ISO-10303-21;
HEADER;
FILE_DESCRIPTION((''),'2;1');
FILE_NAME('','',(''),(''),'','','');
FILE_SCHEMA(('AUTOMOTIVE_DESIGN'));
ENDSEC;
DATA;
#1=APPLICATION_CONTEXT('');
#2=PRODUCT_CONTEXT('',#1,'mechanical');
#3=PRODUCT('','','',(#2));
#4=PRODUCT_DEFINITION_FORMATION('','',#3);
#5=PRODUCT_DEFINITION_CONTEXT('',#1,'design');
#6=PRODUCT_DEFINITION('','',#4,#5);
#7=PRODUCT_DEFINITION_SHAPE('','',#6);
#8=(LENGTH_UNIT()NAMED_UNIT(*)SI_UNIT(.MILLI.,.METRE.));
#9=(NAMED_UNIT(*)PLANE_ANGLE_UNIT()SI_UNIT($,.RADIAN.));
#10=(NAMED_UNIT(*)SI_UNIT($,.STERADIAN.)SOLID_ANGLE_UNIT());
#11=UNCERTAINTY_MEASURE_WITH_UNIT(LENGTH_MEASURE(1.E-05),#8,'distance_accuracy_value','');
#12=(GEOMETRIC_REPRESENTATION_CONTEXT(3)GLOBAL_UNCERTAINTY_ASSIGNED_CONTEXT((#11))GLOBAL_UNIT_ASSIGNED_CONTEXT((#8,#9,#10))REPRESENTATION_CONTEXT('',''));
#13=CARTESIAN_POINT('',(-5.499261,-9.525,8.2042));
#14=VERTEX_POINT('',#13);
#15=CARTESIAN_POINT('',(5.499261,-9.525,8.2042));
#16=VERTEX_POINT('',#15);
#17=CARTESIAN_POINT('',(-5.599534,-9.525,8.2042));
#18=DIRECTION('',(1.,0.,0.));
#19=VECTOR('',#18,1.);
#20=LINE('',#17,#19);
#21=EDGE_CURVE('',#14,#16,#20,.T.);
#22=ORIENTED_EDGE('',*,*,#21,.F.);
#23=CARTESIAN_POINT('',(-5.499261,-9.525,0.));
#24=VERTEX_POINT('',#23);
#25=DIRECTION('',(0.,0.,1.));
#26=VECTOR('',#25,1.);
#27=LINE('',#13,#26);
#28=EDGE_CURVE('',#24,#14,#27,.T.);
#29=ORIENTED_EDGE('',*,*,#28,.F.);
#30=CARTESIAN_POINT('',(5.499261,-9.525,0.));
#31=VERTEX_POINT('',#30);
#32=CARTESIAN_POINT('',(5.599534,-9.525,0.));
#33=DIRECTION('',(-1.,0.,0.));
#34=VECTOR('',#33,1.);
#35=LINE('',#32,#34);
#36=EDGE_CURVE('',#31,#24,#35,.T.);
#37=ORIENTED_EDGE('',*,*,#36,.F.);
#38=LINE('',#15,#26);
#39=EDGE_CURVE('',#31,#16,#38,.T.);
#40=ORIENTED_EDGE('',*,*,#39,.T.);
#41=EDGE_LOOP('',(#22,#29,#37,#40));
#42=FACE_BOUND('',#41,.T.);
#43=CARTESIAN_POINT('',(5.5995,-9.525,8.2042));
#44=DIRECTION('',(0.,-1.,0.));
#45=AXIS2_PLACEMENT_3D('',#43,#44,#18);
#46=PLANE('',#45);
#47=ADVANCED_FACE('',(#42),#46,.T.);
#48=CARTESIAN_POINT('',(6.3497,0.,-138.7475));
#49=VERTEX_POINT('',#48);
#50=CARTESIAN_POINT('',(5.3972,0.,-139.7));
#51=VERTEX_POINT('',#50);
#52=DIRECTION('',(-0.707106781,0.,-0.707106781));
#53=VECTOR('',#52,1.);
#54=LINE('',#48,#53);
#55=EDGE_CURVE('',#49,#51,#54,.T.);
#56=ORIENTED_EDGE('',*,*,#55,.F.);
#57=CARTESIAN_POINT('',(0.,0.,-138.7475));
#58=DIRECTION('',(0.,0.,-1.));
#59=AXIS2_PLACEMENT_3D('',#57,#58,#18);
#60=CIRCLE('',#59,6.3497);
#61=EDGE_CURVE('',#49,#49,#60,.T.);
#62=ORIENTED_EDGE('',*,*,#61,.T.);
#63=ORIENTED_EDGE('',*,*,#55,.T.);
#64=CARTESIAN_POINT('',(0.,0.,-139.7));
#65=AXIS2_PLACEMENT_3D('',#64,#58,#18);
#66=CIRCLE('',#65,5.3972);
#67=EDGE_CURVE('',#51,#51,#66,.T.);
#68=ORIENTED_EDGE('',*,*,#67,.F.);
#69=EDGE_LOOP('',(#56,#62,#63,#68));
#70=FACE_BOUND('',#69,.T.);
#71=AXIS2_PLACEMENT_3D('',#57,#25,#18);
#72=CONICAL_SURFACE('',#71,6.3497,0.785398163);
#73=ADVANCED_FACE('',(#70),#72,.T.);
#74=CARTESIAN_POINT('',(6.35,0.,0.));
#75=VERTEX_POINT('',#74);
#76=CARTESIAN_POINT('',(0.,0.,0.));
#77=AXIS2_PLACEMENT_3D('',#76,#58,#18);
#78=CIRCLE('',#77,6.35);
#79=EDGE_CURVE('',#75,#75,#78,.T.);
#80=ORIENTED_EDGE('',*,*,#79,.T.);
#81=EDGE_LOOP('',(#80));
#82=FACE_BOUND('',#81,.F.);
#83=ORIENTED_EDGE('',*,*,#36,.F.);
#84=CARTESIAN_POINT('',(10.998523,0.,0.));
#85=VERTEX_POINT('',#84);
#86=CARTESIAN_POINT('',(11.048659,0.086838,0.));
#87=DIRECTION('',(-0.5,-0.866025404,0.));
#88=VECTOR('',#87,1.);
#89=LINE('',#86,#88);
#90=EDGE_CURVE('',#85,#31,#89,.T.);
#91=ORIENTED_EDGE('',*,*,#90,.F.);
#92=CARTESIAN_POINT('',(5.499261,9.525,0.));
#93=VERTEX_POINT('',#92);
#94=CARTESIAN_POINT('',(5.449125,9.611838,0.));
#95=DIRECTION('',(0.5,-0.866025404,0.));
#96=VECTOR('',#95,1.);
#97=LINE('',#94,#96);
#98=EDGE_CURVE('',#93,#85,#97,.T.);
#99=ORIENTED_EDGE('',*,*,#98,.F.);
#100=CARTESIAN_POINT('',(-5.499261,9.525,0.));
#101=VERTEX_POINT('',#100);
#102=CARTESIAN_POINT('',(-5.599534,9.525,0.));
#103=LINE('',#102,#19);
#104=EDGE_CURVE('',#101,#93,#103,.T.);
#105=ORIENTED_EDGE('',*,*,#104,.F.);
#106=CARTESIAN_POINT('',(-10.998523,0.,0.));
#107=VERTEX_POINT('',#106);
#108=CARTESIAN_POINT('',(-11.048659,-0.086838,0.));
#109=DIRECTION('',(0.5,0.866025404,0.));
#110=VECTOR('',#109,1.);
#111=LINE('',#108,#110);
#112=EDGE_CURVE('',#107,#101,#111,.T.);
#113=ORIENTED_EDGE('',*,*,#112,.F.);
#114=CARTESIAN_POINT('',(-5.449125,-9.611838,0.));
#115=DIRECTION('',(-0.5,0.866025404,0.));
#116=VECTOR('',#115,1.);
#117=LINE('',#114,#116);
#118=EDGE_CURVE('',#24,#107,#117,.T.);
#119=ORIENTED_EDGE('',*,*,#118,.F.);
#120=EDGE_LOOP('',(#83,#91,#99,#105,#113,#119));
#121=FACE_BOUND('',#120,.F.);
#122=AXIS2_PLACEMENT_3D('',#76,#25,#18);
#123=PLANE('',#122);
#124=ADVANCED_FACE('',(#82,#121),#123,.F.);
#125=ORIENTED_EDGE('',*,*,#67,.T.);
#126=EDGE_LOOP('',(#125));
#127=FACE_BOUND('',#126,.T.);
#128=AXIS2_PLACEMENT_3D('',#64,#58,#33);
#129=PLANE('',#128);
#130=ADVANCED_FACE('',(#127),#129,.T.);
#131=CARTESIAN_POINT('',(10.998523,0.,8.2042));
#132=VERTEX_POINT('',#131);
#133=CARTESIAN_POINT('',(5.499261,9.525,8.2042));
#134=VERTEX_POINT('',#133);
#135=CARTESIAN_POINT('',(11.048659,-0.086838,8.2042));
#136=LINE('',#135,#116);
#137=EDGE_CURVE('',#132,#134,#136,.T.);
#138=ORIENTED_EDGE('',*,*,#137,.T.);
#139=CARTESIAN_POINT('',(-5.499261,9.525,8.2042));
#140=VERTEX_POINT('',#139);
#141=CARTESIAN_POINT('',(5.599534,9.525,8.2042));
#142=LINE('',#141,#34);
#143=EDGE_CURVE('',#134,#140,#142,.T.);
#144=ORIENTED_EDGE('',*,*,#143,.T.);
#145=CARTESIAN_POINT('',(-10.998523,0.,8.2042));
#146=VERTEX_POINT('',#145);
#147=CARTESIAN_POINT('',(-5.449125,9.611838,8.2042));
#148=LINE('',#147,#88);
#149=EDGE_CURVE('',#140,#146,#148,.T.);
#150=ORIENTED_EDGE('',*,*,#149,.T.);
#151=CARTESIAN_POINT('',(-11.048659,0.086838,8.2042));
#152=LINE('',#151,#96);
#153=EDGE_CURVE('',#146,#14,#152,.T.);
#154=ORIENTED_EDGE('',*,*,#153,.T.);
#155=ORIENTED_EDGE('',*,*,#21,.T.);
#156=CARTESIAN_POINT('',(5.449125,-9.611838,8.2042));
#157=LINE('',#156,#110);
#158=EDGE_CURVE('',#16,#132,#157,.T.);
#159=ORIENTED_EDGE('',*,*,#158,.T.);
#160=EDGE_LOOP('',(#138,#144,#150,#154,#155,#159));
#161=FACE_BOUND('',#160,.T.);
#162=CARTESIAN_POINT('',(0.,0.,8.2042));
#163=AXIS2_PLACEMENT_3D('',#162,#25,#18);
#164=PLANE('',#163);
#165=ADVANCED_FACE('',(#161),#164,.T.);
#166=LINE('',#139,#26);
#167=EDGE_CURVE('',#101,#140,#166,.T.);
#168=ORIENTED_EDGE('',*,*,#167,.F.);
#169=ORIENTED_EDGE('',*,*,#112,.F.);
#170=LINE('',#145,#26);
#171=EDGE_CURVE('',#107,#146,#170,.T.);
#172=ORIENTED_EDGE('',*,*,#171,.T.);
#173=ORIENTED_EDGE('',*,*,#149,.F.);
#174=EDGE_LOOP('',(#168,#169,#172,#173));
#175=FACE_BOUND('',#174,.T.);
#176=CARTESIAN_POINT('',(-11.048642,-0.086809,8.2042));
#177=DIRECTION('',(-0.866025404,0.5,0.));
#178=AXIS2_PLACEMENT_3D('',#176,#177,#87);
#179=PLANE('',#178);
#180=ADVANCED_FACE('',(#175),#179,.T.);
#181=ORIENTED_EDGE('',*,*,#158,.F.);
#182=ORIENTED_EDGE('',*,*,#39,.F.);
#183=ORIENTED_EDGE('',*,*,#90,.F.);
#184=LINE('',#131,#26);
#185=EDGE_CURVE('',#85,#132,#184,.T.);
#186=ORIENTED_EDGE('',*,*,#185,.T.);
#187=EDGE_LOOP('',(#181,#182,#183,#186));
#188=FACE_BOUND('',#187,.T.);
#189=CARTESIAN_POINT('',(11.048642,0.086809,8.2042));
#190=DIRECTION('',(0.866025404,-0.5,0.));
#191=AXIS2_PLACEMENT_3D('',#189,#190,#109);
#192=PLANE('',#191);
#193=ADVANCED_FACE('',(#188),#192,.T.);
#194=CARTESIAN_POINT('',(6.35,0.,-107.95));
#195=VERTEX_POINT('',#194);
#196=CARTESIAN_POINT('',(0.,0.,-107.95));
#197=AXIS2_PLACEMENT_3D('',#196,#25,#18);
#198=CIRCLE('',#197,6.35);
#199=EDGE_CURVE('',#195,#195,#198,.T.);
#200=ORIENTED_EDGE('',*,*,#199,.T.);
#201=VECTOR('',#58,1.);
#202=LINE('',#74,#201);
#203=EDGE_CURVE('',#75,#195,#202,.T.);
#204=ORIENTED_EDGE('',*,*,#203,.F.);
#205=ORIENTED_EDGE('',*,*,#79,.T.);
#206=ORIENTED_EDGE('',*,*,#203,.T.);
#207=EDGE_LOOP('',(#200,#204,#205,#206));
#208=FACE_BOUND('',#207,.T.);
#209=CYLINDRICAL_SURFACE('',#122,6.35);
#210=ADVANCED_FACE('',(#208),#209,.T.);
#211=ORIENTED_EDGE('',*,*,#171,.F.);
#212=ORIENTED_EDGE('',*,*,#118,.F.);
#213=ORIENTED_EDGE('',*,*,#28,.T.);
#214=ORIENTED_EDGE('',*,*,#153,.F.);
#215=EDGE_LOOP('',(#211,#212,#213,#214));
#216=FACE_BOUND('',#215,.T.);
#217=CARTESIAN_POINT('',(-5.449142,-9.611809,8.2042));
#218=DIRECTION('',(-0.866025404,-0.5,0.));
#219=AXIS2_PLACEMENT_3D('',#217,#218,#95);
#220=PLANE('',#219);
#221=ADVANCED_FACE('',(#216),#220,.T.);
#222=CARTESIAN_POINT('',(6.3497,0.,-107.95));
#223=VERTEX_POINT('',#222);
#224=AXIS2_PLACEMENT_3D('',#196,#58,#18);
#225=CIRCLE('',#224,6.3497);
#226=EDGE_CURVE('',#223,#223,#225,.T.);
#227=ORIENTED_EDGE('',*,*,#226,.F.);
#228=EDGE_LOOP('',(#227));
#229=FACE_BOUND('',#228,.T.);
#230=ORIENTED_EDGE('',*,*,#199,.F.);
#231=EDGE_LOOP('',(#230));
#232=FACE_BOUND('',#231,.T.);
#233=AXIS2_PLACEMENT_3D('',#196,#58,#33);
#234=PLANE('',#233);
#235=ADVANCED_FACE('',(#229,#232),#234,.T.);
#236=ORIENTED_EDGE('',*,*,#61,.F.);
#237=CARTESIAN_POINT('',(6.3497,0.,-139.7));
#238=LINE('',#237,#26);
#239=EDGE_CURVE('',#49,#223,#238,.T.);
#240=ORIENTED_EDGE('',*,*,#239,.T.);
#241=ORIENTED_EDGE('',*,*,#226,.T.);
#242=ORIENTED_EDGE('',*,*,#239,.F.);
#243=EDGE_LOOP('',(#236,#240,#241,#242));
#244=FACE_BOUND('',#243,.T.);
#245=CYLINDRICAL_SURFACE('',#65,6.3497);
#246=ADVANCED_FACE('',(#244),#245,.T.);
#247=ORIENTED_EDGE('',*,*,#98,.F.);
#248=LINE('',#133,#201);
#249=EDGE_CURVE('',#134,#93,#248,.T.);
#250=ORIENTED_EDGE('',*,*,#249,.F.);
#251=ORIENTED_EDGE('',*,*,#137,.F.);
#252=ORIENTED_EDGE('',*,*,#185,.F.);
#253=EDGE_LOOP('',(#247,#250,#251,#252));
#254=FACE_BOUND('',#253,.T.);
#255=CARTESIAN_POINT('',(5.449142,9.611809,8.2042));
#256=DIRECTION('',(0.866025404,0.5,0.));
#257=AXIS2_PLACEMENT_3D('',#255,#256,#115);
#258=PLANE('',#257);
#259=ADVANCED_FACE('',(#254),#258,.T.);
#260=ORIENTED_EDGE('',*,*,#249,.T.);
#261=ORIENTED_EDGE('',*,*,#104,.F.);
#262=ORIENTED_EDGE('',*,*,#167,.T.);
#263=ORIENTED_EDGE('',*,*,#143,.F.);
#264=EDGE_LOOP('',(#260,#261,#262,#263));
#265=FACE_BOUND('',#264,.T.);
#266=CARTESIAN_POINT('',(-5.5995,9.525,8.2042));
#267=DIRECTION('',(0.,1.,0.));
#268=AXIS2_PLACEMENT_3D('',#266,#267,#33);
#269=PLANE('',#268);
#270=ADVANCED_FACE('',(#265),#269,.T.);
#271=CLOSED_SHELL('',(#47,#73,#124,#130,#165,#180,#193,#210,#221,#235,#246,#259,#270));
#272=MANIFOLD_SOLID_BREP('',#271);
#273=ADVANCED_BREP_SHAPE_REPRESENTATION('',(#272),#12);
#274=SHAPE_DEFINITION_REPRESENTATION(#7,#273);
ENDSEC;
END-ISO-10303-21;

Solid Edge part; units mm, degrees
sketch "Sketch1" plane through (0, 0, 0) normal (0, 0, 1) x (1, 0, 0)
  circle A0 centre (0, 0) radius 11.049
  dimension "D1" = 22.098
extrude "Protrusion1" add sketch "Sketch1" along normal blind 8.2042
sketch "Sketch2" plane through (0, 0, 0) normal (0, 0, -1) x (1, 0, 0)
  circle A0 centre (0, 0) radius 6.35
extrude "Protrusion2" add sketch "Sketch2" along normal blind 139.7
sketch "Sketch3" plane through (0, 0, -139.7) normal (0, 0, -1) x (1, 0, 0)
  circle A0 centre (0, 0) radius 6.3497
extrude "Cutout1" cut sketch "Sketch3" against normal blind 31.75 flip side to cut
chamfer "Chamfer_1" distance 0.9525 angle 45 1 edges at (-6.3497, 0, -139.7)
sketch "Sketch4" plane through (0, 0, 8.2042) normal (0, 0, 1) x (1, 0, 0)
  line L0 (-5.5995, 9.525) -> (5.5995, 9.525)
  dimension "D1" = 19.05
extrude "Cutout2" cut sketch "Sketch4" against normal up to next material side at (0, 9.575, 8.2042)
pattern_circular "Pattern1" count 6 over 360 about axis through (0, 0, 8.2042) along (0, 0, 1) of "Cutout2"
properties part number "24102447"
